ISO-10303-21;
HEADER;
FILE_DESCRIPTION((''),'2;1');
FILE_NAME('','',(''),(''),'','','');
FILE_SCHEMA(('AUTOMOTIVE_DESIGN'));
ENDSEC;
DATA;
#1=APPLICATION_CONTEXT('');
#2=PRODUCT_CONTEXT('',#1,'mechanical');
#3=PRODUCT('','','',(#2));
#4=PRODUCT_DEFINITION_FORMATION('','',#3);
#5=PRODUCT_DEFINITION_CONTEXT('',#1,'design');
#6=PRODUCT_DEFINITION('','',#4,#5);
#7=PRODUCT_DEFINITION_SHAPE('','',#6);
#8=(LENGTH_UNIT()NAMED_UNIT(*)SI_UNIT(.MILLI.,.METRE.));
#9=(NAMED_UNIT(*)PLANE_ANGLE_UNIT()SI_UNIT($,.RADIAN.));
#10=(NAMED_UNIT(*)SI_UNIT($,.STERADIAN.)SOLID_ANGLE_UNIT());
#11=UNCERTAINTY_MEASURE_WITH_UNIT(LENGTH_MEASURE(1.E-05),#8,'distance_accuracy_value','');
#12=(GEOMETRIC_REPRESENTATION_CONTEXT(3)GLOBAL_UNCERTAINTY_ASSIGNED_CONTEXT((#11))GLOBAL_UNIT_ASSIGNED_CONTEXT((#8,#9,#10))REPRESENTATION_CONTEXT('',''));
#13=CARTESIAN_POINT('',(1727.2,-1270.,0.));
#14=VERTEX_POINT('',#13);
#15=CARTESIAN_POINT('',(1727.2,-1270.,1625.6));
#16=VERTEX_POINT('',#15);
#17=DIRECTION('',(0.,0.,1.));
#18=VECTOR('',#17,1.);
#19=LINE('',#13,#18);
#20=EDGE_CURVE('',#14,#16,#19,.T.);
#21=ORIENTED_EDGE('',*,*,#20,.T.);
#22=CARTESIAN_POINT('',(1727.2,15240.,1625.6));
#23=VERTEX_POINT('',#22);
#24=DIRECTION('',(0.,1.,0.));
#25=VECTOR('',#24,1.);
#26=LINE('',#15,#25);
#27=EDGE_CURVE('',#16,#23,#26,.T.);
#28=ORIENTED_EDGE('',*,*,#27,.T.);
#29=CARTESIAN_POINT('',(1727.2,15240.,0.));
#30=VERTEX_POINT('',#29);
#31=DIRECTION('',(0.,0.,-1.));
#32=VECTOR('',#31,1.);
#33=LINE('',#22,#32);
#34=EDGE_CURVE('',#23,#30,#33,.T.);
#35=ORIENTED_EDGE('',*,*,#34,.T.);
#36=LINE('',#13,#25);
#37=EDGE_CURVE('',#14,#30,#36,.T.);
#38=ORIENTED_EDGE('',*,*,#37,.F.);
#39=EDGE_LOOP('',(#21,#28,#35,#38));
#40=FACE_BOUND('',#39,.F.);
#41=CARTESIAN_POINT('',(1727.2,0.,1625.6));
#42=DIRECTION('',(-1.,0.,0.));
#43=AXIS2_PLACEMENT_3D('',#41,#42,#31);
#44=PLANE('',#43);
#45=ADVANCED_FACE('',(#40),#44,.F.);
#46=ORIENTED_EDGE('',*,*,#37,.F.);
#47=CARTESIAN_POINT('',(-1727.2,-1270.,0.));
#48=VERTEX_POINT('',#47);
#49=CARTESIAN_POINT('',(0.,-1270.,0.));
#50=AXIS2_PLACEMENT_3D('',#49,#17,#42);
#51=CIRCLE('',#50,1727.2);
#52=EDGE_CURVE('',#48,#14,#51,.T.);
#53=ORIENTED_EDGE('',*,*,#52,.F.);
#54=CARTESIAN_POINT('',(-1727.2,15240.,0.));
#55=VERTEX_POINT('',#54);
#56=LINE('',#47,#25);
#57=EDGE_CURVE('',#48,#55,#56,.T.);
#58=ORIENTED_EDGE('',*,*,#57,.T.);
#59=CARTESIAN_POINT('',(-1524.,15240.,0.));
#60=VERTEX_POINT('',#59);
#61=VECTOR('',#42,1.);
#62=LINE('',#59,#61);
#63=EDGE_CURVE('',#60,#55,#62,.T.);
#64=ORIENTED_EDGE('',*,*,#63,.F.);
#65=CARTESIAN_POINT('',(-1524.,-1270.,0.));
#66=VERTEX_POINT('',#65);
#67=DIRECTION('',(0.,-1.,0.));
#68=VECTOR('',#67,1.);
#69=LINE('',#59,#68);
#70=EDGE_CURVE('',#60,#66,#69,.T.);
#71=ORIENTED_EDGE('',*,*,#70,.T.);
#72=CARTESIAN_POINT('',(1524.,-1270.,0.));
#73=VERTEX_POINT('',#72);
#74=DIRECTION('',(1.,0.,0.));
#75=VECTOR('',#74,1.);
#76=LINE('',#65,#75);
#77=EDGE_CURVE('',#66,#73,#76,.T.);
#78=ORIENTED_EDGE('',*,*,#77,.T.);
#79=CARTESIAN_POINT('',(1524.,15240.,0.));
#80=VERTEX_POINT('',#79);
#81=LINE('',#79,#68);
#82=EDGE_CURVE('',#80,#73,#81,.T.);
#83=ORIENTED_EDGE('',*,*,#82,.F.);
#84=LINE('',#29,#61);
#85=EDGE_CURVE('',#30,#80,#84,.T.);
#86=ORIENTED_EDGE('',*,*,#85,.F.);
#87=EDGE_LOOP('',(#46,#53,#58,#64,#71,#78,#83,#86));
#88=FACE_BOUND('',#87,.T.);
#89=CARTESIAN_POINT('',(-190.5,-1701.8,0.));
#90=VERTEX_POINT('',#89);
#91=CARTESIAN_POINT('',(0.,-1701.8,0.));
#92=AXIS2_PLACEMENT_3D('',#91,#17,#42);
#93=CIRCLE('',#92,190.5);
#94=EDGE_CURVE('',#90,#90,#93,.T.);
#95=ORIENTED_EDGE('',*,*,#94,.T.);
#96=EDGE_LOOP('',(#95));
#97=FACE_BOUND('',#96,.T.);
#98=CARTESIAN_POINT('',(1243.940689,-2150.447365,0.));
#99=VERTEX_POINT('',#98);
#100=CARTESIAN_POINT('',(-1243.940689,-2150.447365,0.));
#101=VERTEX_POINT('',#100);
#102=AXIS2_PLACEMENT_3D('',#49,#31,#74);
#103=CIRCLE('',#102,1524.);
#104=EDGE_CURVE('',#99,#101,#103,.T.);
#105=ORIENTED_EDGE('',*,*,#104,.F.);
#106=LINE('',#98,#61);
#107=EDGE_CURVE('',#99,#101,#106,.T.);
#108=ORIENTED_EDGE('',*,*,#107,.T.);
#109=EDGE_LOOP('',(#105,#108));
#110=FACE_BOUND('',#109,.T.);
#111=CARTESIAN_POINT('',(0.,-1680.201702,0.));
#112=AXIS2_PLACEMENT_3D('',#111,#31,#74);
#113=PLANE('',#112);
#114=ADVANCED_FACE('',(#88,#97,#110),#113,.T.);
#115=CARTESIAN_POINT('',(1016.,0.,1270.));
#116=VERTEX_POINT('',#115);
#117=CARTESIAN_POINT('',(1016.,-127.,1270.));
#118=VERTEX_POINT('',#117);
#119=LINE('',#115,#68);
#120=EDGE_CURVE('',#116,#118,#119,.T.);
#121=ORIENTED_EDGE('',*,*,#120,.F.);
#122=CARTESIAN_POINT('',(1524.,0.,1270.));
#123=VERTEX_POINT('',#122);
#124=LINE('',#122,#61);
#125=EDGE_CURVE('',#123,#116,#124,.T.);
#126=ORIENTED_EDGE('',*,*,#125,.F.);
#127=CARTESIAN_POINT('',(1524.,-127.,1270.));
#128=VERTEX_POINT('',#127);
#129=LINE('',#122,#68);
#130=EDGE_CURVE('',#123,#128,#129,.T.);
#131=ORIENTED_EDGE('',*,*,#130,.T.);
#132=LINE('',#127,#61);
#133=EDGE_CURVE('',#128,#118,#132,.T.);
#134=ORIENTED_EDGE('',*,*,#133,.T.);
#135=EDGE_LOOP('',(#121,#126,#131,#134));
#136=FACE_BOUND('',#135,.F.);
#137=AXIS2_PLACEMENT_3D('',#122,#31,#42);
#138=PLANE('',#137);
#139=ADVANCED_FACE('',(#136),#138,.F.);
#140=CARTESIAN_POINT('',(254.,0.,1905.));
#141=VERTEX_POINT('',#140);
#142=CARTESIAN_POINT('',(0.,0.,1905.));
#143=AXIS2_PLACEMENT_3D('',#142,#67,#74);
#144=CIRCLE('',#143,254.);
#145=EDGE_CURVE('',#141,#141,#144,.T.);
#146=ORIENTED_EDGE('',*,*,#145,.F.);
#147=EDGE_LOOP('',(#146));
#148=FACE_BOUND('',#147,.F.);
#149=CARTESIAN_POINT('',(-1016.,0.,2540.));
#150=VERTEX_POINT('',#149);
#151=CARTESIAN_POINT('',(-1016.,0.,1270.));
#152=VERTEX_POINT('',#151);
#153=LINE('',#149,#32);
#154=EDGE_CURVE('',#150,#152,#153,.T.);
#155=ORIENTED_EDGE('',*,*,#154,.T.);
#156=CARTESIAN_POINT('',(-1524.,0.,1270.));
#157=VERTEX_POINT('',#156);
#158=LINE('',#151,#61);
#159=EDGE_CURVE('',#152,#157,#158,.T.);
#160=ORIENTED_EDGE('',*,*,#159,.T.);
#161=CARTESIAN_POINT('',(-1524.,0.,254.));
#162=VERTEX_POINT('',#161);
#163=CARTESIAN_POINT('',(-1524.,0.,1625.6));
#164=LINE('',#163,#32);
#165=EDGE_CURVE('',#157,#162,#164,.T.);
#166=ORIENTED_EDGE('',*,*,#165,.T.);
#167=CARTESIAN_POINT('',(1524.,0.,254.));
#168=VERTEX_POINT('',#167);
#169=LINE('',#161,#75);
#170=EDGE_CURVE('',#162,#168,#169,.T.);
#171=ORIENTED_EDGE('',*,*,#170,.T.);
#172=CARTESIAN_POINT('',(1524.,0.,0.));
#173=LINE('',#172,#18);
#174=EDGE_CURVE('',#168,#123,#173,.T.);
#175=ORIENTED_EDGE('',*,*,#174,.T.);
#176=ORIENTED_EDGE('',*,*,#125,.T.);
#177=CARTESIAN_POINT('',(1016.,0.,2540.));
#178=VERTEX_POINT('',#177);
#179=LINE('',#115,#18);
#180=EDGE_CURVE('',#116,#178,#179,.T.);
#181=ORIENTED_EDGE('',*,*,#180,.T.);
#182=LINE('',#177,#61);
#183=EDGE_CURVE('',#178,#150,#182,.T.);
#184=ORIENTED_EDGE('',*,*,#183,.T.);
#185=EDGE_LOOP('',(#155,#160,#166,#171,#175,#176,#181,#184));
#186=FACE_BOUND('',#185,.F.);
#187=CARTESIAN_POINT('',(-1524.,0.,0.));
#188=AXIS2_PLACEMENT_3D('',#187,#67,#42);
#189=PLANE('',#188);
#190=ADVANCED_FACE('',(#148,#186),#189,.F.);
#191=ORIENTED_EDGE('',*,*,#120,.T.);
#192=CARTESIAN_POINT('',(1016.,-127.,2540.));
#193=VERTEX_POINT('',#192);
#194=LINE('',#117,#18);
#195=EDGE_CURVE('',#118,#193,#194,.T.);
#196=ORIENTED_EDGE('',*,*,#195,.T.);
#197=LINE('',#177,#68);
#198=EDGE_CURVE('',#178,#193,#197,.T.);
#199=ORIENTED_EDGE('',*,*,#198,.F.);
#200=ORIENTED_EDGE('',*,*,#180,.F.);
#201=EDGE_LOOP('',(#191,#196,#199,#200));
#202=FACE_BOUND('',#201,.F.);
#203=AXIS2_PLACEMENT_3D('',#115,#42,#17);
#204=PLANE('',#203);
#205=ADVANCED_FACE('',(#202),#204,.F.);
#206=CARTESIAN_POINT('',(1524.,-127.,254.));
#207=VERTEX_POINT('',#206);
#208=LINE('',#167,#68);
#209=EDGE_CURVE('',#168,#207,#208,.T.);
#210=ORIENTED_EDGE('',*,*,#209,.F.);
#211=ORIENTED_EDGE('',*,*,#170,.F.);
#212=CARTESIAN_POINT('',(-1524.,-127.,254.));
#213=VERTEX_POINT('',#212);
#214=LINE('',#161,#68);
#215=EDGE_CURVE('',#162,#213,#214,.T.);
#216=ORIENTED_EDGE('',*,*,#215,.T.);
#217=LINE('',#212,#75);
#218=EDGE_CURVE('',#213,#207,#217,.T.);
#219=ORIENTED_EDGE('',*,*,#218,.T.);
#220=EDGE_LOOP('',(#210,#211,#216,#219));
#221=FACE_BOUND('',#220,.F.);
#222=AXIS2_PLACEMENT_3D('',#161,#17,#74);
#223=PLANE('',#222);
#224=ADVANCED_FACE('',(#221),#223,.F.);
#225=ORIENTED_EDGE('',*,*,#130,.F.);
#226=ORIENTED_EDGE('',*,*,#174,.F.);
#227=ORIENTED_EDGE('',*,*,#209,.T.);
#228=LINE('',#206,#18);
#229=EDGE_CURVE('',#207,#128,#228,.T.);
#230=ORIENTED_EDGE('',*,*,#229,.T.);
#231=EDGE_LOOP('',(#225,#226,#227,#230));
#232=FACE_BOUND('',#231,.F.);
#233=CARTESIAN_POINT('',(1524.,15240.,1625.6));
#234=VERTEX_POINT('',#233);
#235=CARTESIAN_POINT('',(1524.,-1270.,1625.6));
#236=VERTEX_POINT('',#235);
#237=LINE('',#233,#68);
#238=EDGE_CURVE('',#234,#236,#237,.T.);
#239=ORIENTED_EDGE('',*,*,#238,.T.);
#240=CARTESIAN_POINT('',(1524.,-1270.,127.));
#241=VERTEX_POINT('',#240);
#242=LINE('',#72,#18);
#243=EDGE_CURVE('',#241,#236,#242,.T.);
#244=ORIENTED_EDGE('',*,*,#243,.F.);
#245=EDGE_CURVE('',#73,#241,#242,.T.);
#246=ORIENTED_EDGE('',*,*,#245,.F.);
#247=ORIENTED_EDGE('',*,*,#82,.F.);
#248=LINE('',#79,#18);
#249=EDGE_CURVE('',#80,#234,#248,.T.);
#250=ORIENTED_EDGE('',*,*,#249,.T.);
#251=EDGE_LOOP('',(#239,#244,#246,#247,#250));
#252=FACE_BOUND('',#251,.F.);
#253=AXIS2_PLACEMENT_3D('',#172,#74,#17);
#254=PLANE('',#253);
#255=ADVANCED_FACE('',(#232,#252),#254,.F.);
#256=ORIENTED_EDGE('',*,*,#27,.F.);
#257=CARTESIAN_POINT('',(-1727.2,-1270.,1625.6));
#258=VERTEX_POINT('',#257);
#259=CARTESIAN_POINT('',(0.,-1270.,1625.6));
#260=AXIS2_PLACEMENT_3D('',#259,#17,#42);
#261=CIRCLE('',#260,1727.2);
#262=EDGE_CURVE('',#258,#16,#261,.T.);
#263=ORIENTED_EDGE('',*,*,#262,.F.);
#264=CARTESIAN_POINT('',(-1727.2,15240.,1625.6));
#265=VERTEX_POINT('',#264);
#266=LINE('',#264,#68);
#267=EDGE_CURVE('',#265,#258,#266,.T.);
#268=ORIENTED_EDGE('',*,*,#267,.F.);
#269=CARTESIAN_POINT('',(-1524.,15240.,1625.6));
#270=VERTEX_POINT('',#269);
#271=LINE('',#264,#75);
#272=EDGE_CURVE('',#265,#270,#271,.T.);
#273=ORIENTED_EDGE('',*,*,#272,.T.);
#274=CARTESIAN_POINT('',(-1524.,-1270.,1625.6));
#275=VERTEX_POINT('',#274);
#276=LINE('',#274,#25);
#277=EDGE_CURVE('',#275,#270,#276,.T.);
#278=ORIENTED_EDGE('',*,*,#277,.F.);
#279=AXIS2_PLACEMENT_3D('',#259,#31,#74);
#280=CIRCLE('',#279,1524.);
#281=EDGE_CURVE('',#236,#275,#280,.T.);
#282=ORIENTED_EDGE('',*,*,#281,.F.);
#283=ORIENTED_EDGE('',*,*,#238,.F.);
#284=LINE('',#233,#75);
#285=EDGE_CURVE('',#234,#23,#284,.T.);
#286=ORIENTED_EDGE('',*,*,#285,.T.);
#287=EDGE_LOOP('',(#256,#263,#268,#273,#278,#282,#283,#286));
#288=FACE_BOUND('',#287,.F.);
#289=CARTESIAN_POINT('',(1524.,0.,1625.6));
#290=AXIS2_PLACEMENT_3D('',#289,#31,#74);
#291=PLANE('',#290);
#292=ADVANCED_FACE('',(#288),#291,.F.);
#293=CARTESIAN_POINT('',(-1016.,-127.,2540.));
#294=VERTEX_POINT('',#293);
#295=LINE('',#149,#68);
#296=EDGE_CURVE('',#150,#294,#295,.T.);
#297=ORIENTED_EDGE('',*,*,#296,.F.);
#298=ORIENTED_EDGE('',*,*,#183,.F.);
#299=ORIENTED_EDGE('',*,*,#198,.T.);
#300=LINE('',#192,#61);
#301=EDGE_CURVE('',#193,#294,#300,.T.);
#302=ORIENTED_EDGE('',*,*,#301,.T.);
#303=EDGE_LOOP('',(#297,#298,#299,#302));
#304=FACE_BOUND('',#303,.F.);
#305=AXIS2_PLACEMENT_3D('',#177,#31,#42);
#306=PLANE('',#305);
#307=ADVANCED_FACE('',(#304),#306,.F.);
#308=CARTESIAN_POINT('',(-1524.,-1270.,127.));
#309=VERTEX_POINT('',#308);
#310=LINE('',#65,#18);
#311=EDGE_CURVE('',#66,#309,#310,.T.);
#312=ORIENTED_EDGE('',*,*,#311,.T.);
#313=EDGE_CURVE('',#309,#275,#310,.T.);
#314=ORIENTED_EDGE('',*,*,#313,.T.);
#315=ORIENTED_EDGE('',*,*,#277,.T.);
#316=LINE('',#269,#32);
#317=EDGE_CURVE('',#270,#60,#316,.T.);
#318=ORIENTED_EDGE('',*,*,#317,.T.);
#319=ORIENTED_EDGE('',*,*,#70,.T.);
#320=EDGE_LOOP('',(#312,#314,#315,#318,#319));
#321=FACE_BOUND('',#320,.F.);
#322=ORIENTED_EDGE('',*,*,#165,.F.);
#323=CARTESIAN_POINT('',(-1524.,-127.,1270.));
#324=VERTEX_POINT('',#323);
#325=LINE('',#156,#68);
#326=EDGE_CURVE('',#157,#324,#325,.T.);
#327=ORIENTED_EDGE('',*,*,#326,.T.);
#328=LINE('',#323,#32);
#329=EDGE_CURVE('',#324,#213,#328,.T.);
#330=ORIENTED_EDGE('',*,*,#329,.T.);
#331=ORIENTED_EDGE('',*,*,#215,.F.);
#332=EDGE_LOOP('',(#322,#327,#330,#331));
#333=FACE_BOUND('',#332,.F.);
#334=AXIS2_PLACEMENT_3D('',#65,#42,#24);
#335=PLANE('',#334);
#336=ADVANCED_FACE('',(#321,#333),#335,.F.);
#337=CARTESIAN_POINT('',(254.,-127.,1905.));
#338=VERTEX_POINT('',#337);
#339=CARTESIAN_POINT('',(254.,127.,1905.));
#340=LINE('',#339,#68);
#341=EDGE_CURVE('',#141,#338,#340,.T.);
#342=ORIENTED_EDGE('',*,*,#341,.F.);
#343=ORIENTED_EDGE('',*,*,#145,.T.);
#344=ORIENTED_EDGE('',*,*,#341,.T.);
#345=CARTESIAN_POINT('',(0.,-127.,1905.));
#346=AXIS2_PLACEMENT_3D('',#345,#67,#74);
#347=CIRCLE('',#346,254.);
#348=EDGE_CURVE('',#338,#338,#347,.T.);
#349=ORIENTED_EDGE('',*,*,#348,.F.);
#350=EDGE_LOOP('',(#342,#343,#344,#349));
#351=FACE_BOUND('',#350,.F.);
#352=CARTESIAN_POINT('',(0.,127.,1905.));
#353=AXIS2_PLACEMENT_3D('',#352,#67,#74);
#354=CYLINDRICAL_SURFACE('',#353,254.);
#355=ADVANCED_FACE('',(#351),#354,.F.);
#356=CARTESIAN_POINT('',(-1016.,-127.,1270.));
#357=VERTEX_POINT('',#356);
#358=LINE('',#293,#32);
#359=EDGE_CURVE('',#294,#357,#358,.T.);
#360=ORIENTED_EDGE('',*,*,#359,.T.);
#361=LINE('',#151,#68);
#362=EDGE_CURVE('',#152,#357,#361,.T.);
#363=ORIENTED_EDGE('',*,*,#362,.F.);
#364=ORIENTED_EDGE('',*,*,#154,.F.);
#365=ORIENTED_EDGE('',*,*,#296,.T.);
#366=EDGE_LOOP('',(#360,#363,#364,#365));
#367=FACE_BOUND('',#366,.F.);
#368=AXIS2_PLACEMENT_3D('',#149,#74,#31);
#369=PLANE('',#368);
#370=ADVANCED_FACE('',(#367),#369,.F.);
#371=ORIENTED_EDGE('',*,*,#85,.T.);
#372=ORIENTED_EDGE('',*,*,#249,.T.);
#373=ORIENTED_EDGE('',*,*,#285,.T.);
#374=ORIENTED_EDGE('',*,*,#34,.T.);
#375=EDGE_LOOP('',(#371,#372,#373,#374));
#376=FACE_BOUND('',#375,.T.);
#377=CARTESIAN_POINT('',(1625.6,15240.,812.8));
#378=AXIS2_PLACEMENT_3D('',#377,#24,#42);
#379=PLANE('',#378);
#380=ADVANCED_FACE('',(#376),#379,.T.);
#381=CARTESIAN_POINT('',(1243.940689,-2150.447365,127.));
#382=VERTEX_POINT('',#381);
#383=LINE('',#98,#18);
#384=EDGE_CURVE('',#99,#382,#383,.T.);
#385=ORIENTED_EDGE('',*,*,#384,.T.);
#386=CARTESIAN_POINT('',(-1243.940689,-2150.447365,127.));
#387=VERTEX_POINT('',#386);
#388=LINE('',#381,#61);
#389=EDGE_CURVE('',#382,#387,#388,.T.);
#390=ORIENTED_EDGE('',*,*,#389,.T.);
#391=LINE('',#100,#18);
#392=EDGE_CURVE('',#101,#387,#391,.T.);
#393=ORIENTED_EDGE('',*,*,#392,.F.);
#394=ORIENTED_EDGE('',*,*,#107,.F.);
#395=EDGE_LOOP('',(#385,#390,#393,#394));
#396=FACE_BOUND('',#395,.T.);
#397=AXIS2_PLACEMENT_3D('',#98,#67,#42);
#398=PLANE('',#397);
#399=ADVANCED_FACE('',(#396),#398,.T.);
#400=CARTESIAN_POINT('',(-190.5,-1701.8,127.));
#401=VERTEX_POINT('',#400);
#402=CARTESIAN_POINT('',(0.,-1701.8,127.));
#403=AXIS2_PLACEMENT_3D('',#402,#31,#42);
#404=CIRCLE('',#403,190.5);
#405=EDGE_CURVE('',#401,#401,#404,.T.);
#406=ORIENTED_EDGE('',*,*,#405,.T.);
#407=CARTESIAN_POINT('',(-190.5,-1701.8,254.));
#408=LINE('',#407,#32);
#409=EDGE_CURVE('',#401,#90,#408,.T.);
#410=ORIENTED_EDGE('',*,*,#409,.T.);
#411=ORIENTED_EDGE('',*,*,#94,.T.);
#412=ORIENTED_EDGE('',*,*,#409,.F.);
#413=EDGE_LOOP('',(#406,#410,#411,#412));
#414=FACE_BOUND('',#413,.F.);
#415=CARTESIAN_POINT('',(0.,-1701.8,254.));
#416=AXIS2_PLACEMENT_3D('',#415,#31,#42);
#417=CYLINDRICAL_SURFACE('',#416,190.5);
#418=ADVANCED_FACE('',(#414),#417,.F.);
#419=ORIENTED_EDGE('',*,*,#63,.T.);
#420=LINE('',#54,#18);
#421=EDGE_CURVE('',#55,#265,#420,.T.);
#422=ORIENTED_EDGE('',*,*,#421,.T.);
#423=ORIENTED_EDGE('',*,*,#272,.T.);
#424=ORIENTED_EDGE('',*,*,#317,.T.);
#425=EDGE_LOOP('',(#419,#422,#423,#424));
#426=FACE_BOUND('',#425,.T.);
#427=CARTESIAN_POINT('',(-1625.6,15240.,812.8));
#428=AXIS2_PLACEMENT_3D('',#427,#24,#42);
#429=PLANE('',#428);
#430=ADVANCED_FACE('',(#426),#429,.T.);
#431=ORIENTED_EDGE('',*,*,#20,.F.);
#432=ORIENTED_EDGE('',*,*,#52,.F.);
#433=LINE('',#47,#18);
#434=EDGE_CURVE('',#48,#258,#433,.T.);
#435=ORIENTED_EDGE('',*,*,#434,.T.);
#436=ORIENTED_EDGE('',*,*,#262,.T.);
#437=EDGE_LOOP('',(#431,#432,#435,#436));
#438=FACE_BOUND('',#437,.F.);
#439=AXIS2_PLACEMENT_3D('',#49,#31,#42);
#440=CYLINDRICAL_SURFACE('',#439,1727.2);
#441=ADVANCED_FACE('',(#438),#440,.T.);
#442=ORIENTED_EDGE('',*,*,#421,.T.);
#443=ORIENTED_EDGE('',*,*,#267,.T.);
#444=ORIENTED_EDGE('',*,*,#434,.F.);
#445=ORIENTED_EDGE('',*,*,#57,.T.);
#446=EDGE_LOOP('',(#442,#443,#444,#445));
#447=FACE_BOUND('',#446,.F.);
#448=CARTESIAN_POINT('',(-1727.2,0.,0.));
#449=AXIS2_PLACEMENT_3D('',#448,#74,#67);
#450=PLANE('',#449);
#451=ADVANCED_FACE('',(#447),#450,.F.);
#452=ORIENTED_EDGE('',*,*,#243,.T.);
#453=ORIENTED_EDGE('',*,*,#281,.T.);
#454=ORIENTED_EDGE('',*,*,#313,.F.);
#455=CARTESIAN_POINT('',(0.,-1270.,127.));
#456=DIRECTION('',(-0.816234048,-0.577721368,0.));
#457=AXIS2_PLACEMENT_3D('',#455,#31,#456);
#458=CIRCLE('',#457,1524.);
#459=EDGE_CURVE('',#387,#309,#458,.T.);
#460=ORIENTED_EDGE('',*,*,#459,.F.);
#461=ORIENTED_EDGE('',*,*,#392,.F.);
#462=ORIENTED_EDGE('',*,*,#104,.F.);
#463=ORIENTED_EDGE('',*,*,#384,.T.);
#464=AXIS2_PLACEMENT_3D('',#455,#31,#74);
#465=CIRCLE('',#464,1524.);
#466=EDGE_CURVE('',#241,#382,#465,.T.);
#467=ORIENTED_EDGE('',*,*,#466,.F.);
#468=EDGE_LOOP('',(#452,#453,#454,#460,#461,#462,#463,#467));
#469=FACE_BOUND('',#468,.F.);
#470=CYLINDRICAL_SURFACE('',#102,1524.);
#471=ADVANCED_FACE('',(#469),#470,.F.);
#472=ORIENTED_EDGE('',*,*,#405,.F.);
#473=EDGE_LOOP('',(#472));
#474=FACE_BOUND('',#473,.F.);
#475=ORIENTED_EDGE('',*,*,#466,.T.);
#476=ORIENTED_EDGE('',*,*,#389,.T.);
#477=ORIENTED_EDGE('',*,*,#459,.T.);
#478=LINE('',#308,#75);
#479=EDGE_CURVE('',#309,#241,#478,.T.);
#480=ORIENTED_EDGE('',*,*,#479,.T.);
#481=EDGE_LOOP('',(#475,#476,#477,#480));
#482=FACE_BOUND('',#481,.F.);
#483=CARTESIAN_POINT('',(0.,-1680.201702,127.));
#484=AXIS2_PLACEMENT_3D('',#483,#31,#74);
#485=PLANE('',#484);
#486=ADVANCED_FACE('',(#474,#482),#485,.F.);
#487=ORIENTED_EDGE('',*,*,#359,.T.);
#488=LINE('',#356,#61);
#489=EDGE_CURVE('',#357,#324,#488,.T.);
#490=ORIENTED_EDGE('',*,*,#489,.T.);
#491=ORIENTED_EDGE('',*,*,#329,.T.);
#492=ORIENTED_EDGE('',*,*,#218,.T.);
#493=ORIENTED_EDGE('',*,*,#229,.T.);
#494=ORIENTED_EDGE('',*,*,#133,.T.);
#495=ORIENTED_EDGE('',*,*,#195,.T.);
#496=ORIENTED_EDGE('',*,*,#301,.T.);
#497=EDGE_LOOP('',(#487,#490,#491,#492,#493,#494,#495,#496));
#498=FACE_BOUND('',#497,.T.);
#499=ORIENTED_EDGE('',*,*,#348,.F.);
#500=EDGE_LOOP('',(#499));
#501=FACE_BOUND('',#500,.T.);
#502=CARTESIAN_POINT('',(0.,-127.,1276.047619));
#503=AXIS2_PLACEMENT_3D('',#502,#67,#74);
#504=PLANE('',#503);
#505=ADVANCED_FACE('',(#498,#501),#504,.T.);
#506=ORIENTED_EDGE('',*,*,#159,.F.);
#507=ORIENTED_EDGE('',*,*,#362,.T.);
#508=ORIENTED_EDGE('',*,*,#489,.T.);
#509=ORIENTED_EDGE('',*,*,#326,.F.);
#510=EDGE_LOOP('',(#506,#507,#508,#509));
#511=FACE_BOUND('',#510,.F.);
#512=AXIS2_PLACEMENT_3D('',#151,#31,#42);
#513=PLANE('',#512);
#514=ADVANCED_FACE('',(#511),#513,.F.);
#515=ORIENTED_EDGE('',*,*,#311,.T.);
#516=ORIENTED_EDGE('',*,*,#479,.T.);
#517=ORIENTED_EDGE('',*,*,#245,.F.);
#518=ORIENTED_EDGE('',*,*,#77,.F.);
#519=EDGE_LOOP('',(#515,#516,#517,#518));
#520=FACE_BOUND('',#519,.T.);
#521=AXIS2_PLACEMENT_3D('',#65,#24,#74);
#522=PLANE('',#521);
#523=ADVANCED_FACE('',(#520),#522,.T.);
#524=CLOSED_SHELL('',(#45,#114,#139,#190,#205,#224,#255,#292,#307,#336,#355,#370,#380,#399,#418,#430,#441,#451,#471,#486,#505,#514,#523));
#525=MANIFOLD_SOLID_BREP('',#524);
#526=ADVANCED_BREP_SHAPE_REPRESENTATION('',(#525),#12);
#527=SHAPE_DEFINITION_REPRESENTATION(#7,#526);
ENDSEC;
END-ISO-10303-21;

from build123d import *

# Parameters (mm, degrees)
F1_DEPTH  = 1625.6
F3_DEPTH  = 127
F5_D      = 508
F5_DEPTH  = 127
F5_TIP    = 152.618597233
F7_DEPTH  = 15240
F9_DEPTH  = 127
F11_D     = 381
F11_DEPTH = 127
F11_TIP   = 114.4639479248


# Not quite as in the source:
# - a feature names something its author has since deleted; it is built from what else it names


with BuildPart() as f1:
    # F0 (on Top) → F1 (new body)
    with BuildSketch(Plane.XY):
        with BuildLine():
            Line((-1524, 0), (-1727.2, 0))
            Line((-1727.2, 0), (-1727.2, -1270))
            ThreePointArc((-1727.2, -1270), (0, -2997.2), (1727.2, -1270))
            Line((1727.2, -1270), (1727.2, 0))
            Line((1727.2, 0), (1524, 0))
            Line((1524, 0), (1524, -1270))
            ThreePointArc((1524, -1270), (0, -2794), (-1524, -1270))
            Line((-1524, -1270), (-1524, 0))
        make_face()
    extrude(amount=F1_DEPTH)

    # F2 (on Front) → F3 (join)
    with BuildSketch(Plane.XZ):
        Polygon((-1016, 1270), (-1524, 1270), (-1524, 254), (1524, 254), (1524, 1270), (1016, 1270), (1016, 2540), (0, 2540), (-1016, 2540), align=None)
    extrude(amount=F3_DEPTH)

    # F5
    with Locations(Plane(origin=(0, 0, 0), x_dir=(-1, 0, 0), z_dir=(0, 1, 0))):
        with Locations((0, 1905)):
            Hole(F5_D / 2, depth=F5_DEPTH)
            with Locations((0, 0, -(F5_DEPTH + F5_TIP / 2))):  # 118° drill point
                Cone(0, F5_D / 2, F5_TIP, mode=Mode.SUBTRACT)

    # F6 (on face) → F7 (join)
    with BuildSketch(Plane(origin=(0, 0, 0), x_dir=(-1, 0, 0), z_dir=(0, 1, 0))):
        Polygon((-1524, 1270), (-1524, 1625.6), (-1727.2, 1625.6), (-1727.2, 0), (-1524, 0), (-1524, 254), align=None)
        Polygon((1524, 1270), (1524, 254), (1524, 0), (1727.2, 0), (1727.2, 1625.6), (1524, 1625.6), align=None)
    extrude(amount=F7_DEPTH)

    # F8 (on face) → F9 (join)
    with BuildSketch(Plane(origin=(0, 0, 0), x_dir=(1, 0, 0), z_dir=(0, 0, -1))):
        with BuildLine():
            ThreePointArc((-1243.9406885357, 2150.4473654939), (-1452.2984557811, 1731.9580017012), (-1524, 1270))
            Line((-1524, 1270), (1524, 1270))
            ThreePointArc((1524, 1270), (1452.2984557811, 1731.9580017012), (1243.9406885357, 2150.4473654939))
            Line((1243.9406885357, 2150.4473654939), (-1243.9406885357, 2150.4473654939))
        make_face()
    extrude(amount=-F9_DEPTH)

    # F11
    with Locations(Plane.XY.offset(127)):
        with Locations((0, -1701.8)):
            Hole(F11_D / 2, depth=F11_DEPTH)
            with Locations((0, 0, -(F11_DEPTH + F11_TIP / 2))):  # 118° drill point
                Cone(0, F11_D / 2, F11_TIP, mode=Mode.SUBTRACT)


solid = f1.part
